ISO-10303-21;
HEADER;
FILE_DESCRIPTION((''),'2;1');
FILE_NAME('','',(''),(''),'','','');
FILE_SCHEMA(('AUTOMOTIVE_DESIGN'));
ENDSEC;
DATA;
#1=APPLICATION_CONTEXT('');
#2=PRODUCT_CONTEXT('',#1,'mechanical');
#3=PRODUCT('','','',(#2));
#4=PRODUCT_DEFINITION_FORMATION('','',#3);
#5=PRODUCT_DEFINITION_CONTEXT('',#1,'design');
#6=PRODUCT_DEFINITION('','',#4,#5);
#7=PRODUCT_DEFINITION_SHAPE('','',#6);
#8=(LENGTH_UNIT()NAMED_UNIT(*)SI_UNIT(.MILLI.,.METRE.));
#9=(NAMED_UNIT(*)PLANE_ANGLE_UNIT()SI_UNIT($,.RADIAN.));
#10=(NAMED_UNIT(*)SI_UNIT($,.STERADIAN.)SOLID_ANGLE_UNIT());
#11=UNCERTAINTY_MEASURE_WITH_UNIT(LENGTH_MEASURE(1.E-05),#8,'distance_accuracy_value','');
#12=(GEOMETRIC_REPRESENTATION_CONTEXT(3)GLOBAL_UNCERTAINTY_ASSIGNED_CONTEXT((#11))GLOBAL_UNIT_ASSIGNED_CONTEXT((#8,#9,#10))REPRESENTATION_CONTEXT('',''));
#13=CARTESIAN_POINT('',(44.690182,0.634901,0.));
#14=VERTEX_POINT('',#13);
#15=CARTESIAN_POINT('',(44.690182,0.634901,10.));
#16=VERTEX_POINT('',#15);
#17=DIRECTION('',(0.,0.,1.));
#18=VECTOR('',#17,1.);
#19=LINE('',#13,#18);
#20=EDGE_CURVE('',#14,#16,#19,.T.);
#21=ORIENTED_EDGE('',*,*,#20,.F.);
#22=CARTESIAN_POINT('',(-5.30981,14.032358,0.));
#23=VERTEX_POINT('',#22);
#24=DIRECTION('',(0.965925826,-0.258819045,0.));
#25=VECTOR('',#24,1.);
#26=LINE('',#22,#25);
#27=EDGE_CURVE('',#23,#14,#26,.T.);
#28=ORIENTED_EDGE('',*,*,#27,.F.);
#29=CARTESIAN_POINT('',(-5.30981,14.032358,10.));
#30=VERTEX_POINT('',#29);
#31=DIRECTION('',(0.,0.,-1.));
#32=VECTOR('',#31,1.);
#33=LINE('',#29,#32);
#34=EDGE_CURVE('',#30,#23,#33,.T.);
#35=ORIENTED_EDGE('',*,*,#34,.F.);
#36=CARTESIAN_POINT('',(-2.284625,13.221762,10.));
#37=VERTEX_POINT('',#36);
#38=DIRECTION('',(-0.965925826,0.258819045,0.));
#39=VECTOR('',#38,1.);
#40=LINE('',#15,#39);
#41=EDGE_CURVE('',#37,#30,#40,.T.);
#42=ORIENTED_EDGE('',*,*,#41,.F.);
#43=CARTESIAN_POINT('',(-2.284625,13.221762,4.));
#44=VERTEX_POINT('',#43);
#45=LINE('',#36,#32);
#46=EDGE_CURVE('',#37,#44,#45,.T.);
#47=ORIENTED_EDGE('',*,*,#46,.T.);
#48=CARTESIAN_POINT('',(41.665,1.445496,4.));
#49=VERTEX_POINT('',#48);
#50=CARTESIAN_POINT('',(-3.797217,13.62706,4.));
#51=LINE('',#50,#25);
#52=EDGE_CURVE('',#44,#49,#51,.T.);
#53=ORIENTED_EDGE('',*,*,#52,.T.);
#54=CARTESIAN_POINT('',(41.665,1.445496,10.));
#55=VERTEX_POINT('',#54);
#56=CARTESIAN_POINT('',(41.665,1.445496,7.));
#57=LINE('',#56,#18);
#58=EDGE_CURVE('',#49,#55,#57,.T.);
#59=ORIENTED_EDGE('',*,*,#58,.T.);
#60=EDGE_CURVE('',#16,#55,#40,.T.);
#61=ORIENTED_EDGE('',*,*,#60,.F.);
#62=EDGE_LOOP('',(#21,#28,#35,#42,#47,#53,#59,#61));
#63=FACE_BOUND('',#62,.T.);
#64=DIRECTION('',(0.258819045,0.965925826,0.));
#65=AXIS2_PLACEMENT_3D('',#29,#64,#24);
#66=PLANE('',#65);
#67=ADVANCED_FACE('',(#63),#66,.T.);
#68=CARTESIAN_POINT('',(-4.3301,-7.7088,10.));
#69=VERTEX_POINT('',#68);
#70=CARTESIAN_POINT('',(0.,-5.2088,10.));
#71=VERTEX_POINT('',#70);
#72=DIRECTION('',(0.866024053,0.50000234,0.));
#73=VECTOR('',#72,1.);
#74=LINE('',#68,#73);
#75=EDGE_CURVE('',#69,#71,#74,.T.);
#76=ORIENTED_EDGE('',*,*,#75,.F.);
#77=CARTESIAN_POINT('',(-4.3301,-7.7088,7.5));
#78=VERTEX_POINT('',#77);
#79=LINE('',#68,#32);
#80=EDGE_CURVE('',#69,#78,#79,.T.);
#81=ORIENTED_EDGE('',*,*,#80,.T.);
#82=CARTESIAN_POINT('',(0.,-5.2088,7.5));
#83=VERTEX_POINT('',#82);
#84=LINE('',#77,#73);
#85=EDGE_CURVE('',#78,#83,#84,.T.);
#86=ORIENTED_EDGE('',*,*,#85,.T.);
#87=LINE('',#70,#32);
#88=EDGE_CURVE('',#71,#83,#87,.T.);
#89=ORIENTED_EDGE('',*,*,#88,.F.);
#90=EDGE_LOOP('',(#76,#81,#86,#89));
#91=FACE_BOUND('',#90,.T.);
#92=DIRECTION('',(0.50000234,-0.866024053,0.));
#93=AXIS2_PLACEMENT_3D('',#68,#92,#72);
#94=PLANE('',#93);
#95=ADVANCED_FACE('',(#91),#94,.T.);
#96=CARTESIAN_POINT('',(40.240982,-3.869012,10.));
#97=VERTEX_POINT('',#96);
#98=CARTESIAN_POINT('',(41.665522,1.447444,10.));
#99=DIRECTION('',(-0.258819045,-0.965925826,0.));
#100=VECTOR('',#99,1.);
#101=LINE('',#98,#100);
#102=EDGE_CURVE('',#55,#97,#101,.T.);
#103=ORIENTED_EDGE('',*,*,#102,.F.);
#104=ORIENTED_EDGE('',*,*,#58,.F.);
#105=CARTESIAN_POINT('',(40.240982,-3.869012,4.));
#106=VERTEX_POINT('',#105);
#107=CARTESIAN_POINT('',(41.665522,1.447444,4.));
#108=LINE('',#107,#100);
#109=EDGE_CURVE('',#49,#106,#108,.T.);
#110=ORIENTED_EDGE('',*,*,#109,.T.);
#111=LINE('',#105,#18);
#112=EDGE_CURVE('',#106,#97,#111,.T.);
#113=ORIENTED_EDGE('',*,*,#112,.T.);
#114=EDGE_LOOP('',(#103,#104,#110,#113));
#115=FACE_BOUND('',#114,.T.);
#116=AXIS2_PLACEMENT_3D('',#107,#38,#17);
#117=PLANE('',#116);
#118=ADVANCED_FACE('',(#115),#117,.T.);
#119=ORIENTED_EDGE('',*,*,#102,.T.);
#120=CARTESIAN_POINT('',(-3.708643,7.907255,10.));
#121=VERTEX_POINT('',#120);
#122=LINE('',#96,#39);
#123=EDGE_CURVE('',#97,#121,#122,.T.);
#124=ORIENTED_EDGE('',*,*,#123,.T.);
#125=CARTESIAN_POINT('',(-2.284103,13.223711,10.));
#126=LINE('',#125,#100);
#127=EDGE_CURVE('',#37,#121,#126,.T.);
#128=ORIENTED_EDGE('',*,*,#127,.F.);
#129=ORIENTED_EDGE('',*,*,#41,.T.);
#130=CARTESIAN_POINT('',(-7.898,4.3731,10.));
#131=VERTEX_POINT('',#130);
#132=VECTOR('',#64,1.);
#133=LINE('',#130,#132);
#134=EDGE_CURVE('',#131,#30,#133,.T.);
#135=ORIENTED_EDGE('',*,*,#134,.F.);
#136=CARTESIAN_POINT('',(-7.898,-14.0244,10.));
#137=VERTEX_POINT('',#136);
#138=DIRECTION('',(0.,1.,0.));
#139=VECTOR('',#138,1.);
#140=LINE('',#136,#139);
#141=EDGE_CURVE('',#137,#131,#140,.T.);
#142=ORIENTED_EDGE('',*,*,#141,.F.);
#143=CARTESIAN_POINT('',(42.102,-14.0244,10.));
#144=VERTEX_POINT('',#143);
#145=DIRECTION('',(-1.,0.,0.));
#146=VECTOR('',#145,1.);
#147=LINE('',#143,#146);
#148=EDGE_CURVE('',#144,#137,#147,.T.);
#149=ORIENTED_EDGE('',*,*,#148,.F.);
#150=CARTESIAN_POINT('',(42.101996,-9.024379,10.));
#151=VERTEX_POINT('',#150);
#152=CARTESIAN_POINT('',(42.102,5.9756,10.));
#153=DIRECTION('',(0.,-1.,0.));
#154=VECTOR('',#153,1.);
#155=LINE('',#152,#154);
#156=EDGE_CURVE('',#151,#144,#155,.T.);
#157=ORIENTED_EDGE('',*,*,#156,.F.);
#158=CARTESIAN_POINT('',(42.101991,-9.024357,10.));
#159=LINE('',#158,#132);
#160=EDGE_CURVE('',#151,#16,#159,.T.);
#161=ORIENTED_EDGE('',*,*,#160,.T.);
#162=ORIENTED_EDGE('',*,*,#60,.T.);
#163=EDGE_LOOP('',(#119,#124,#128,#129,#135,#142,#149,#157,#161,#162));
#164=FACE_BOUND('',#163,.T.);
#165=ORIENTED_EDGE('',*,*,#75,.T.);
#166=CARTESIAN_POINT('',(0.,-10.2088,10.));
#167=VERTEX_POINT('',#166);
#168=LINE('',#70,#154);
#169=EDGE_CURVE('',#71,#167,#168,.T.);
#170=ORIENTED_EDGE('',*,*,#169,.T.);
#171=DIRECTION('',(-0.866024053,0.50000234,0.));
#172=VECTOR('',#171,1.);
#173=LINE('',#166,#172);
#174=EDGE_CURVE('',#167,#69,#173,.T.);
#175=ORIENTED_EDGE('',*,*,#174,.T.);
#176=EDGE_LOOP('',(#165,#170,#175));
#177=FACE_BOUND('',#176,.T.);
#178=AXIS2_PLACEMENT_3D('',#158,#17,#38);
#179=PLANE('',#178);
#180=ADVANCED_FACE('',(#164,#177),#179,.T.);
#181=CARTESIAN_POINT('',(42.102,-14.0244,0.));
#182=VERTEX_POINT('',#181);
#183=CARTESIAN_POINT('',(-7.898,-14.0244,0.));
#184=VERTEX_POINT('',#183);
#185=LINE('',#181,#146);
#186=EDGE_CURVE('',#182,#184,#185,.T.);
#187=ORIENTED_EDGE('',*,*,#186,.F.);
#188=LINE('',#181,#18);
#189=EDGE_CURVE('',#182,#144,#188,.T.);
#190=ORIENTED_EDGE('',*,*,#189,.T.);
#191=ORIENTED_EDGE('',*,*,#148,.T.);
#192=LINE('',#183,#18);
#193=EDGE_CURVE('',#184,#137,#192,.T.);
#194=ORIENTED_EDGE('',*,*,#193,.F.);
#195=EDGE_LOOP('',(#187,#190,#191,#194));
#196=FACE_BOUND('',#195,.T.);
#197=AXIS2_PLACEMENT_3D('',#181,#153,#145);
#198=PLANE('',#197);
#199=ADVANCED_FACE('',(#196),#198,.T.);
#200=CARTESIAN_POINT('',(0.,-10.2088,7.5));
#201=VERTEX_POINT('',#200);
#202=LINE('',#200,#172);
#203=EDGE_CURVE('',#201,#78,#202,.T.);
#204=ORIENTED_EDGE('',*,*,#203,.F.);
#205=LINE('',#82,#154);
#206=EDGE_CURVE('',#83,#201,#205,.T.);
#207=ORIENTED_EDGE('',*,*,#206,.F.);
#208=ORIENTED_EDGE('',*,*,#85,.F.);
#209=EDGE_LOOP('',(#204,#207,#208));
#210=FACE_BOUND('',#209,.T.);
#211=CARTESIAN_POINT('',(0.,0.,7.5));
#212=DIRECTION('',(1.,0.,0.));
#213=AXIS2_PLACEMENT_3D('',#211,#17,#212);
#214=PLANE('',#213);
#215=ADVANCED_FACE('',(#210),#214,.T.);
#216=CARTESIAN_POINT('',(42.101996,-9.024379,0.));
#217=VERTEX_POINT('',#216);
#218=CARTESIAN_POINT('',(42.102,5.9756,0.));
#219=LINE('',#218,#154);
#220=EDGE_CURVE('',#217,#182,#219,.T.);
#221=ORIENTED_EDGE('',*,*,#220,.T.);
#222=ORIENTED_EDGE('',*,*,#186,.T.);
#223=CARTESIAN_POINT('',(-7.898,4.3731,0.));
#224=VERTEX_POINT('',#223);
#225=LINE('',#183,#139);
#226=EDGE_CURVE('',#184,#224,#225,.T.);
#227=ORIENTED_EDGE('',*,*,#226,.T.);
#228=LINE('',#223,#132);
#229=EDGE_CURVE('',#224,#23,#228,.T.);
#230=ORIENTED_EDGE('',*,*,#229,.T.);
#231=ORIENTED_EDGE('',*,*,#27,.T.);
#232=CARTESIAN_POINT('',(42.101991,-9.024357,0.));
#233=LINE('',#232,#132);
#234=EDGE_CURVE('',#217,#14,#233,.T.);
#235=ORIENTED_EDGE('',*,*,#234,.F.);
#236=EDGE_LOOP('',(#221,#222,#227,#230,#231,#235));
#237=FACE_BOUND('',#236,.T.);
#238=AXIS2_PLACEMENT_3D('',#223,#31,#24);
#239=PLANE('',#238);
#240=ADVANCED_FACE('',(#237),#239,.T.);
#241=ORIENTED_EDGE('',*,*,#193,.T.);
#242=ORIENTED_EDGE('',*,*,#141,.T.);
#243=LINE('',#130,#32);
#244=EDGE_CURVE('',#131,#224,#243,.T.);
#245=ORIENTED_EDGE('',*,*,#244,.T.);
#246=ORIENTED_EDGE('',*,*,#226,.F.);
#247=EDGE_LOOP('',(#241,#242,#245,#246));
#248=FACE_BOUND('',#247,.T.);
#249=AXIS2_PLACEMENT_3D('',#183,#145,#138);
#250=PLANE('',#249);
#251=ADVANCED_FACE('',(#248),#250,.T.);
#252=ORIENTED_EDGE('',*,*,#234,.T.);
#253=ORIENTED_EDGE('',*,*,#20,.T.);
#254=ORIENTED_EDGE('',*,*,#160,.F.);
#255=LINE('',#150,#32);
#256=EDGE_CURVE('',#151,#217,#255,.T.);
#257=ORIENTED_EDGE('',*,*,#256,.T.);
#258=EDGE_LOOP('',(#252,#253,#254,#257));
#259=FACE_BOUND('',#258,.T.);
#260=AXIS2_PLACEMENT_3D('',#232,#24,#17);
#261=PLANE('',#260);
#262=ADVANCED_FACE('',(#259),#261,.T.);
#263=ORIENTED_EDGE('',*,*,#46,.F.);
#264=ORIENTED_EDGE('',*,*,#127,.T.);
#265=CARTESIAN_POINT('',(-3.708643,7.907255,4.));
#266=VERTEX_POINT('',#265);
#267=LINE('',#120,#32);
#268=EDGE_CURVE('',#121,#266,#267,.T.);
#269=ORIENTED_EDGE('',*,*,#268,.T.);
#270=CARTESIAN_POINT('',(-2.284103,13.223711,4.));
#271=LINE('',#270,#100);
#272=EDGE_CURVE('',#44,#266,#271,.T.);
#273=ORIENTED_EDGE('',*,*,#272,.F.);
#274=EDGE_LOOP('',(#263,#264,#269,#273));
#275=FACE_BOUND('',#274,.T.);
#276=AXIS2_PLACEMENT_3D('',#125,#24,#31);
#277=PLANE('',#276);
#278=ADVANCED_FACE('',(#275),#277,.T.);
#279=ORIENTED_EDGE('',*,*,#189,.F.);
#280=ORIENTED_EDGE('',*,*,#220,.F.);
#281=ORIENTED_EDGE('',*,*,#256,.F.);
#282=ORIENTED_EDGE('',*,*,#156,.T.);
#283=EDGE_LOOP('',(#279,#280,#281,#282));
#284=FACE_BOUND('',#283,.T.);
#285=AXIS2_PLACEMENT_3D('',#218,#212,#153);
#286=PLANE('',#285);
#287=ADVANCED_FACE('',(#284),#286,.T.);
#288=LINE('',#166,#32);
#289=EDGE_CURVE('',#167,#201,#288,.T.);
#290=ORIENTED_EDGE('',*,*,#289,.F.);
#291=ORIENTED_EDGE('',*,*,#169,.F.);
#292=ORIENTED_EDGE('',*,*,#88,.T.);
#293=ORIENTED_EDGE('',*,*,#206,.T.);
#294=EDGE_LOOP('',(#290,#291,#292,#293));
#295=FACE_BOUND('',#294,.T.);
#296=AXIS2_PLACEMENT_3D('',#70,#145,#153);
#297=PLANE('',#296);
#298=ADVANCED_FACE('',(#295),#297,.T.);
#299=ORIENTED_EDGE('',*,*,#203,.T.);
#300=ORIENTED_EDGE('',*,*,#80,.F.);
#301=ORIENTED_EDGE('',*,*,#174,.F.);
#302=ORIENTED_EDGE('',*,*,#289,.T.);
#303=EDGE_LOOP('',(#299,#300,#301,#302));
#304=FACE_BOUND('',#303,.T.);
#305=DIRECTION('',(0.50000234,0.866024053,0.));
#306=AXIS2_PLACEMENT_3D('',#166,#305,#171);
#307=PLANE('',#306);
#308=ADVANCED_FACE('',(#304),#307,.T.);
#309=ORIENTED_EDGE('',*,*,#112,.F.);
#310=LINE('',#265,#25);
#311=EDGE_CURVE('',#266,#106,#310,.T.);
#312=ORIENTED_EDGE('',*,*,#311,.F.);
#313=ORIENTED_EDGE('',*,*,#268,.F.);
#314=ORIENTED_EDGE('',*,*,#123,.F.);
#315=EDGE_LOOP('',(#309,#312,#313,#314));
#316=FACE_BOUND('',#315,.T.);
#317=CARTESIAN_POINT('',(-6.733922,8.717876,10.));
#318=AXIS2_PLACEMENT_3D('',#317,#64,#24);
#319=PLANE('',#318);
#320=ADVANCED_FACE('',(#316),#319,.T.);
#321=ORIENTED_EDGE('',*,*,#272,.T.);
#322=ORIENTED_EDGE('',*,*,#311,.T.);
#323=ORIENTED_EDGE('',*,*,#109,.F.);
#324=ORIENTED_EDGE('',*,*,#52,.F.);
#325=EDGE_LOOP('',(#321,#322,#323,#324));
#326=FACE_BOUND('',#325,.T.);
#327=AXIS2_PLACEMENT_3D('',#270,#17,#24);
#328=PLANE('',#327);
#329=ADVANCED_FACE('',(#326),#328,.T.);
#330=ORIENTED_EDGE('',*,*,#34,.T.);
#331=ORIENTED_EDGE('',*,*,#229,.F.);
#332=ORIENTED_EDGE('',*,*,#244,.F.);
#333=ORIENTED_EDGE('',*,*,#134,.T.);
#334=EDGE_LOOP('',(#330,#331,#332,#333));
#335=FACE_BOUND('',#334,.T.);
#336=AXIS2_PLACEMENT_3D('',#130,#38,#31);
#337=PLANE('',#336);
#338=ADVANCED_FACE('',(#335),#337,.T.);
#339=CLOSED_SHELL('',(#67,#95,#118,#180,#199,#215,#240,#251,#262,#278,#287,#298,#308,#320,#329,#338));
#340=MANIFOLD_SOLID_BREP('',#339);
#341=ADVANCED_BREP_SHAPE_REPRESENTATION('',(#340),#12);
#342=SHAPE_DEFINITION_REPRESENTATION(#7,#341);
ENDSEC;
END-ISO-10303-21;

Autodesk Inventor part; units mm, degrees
ref_plane "YZ Plane" through (0, 0, 0) normal (1, 0, 0) x (0, 1, 0)
ref_plane "XZ Plane" through (0, 0, 0) normal (0, 1, 0) x (-1, 0, 0)
ref_plane "XY Plane" through (0, 0, 0) normal (0, 0, 1) x (1, 0, 0)
sketch "Sketch1" plane through (0, 0, 0) normal (0, 0, 1) x (1, 0, 0)
  line L0 (-7.898, 5.9756) -> (42.102, 5.9756)
  line L1 (42.102, 5.9756) -> (42.102, -14.0244)
  line L2 (42.102, -14.0244) -> (-7.898, -14.0244)
  line L3 (-7.898, -14.0244) -> (-7.898, 5.9756)
  point P0 (0, 0)
  dimension "d0" = 50
  dimension "d1" = 20
extrude "Extrusion1" add sketch "Sketch1" along normal blind 10
sketch "Sketch2" plane through (0, 0, 10) normal (0, 0, 1) x (1, 0, 0)
  line L0 (-7.898, 5.9756) -> (-7.898, -14.0244) projected
  line L1 (-7.898, 4.3731) -> (42.102, -9.0244)
  line L2 (42.102, -14.0244) -> (42.102, 5.9756) projected
  line L3 (-7.898, 4.3731) -> (-7.898, 5.9756)
  line L4 (42.102, 5.9756) -> (-7.898, 5.9756) projected
  line L5 (42.102, 5.9756) -> (42.102, -9.0244)
  point P0 (0, 0)
  dimension "d4" = 5
  dimension "d5" = 75
extrude "Extrusion2" cut sketch "Sketch2" against normal up to surface (10 mm away)
sketch "Sketch3" plane through (-7.898, 4.3731, 10) normal (0.258819, 0.9659258, 0) x (0.9659258, -0.258819, 0)
  line L0 (53.0579, 0) -> (51.7638, 0) projected
  line L1 (0, 10) -> (4.7616, 10) projected
  line L2 (51.7638, 0) -> (0, 0)
  line L3 (0, 0) -> (0, 10)
  line L4 (0, 10) -> (51.7638, 10)
  line L5 (51.7638, 10) -> (51.7638, 0)
  point P0 (8.7608, 10)
extrude "Extrusion3" add sketch "Sketch3" along normal blind 10
sketch "Sketch4" plane through (-5.3099, 14.0324, 10) normal (0.258819, 0.9659258, 0) x (0.9659258, -0.258819, 0)
  line L0 (48.632, 0) -> (3.132, 0)
  line L1 (3.132, 0) -> (3.132, 6)
  line L2 (3.132, 6) -> (48.632, 6)
  line L3 (48.632, 6) -> (48.632, 0)
  line L4 (0, 0) -> (51.7638, 0) projected
  line L5 (0, 10) -> (0, 0) projected
  line L6 (51.7638, 10) -> (0, 10) projected
  point P0 (8.7608, 10)
  point P1 (25.882, 5)
  dimension "d10" = 45.5
  dimension "d11" = 6
  dimension "d13" = 25.882
  dimension "d14" = 22.75
  dimension "d23" = 0
extrude "Extrusion4" cut sketch "Sketch4" against normal blind 5.5
sketch "Sketch5" plane through (0, 0, 10) normal (0, 0, 1) x (1, 0, 0)
  line L0 (0, -5.2088) -> (0, -10.2088)
  line L1 (0, -10.2088) -> (-4.3301, -7.7088)
  line L2 (-4.3301, -7.7088) -> (0, -5.2088)
  point P0 (0, 0)
  dimension "d17" = 5
  dimension "d18" = 5
extrude "Extrusion5" cut sketch "Sketch5" against normal blind 2.5
equation "\"d14\" = 0.5 * d10"
properties part number "Angled Base AdapterFront"
